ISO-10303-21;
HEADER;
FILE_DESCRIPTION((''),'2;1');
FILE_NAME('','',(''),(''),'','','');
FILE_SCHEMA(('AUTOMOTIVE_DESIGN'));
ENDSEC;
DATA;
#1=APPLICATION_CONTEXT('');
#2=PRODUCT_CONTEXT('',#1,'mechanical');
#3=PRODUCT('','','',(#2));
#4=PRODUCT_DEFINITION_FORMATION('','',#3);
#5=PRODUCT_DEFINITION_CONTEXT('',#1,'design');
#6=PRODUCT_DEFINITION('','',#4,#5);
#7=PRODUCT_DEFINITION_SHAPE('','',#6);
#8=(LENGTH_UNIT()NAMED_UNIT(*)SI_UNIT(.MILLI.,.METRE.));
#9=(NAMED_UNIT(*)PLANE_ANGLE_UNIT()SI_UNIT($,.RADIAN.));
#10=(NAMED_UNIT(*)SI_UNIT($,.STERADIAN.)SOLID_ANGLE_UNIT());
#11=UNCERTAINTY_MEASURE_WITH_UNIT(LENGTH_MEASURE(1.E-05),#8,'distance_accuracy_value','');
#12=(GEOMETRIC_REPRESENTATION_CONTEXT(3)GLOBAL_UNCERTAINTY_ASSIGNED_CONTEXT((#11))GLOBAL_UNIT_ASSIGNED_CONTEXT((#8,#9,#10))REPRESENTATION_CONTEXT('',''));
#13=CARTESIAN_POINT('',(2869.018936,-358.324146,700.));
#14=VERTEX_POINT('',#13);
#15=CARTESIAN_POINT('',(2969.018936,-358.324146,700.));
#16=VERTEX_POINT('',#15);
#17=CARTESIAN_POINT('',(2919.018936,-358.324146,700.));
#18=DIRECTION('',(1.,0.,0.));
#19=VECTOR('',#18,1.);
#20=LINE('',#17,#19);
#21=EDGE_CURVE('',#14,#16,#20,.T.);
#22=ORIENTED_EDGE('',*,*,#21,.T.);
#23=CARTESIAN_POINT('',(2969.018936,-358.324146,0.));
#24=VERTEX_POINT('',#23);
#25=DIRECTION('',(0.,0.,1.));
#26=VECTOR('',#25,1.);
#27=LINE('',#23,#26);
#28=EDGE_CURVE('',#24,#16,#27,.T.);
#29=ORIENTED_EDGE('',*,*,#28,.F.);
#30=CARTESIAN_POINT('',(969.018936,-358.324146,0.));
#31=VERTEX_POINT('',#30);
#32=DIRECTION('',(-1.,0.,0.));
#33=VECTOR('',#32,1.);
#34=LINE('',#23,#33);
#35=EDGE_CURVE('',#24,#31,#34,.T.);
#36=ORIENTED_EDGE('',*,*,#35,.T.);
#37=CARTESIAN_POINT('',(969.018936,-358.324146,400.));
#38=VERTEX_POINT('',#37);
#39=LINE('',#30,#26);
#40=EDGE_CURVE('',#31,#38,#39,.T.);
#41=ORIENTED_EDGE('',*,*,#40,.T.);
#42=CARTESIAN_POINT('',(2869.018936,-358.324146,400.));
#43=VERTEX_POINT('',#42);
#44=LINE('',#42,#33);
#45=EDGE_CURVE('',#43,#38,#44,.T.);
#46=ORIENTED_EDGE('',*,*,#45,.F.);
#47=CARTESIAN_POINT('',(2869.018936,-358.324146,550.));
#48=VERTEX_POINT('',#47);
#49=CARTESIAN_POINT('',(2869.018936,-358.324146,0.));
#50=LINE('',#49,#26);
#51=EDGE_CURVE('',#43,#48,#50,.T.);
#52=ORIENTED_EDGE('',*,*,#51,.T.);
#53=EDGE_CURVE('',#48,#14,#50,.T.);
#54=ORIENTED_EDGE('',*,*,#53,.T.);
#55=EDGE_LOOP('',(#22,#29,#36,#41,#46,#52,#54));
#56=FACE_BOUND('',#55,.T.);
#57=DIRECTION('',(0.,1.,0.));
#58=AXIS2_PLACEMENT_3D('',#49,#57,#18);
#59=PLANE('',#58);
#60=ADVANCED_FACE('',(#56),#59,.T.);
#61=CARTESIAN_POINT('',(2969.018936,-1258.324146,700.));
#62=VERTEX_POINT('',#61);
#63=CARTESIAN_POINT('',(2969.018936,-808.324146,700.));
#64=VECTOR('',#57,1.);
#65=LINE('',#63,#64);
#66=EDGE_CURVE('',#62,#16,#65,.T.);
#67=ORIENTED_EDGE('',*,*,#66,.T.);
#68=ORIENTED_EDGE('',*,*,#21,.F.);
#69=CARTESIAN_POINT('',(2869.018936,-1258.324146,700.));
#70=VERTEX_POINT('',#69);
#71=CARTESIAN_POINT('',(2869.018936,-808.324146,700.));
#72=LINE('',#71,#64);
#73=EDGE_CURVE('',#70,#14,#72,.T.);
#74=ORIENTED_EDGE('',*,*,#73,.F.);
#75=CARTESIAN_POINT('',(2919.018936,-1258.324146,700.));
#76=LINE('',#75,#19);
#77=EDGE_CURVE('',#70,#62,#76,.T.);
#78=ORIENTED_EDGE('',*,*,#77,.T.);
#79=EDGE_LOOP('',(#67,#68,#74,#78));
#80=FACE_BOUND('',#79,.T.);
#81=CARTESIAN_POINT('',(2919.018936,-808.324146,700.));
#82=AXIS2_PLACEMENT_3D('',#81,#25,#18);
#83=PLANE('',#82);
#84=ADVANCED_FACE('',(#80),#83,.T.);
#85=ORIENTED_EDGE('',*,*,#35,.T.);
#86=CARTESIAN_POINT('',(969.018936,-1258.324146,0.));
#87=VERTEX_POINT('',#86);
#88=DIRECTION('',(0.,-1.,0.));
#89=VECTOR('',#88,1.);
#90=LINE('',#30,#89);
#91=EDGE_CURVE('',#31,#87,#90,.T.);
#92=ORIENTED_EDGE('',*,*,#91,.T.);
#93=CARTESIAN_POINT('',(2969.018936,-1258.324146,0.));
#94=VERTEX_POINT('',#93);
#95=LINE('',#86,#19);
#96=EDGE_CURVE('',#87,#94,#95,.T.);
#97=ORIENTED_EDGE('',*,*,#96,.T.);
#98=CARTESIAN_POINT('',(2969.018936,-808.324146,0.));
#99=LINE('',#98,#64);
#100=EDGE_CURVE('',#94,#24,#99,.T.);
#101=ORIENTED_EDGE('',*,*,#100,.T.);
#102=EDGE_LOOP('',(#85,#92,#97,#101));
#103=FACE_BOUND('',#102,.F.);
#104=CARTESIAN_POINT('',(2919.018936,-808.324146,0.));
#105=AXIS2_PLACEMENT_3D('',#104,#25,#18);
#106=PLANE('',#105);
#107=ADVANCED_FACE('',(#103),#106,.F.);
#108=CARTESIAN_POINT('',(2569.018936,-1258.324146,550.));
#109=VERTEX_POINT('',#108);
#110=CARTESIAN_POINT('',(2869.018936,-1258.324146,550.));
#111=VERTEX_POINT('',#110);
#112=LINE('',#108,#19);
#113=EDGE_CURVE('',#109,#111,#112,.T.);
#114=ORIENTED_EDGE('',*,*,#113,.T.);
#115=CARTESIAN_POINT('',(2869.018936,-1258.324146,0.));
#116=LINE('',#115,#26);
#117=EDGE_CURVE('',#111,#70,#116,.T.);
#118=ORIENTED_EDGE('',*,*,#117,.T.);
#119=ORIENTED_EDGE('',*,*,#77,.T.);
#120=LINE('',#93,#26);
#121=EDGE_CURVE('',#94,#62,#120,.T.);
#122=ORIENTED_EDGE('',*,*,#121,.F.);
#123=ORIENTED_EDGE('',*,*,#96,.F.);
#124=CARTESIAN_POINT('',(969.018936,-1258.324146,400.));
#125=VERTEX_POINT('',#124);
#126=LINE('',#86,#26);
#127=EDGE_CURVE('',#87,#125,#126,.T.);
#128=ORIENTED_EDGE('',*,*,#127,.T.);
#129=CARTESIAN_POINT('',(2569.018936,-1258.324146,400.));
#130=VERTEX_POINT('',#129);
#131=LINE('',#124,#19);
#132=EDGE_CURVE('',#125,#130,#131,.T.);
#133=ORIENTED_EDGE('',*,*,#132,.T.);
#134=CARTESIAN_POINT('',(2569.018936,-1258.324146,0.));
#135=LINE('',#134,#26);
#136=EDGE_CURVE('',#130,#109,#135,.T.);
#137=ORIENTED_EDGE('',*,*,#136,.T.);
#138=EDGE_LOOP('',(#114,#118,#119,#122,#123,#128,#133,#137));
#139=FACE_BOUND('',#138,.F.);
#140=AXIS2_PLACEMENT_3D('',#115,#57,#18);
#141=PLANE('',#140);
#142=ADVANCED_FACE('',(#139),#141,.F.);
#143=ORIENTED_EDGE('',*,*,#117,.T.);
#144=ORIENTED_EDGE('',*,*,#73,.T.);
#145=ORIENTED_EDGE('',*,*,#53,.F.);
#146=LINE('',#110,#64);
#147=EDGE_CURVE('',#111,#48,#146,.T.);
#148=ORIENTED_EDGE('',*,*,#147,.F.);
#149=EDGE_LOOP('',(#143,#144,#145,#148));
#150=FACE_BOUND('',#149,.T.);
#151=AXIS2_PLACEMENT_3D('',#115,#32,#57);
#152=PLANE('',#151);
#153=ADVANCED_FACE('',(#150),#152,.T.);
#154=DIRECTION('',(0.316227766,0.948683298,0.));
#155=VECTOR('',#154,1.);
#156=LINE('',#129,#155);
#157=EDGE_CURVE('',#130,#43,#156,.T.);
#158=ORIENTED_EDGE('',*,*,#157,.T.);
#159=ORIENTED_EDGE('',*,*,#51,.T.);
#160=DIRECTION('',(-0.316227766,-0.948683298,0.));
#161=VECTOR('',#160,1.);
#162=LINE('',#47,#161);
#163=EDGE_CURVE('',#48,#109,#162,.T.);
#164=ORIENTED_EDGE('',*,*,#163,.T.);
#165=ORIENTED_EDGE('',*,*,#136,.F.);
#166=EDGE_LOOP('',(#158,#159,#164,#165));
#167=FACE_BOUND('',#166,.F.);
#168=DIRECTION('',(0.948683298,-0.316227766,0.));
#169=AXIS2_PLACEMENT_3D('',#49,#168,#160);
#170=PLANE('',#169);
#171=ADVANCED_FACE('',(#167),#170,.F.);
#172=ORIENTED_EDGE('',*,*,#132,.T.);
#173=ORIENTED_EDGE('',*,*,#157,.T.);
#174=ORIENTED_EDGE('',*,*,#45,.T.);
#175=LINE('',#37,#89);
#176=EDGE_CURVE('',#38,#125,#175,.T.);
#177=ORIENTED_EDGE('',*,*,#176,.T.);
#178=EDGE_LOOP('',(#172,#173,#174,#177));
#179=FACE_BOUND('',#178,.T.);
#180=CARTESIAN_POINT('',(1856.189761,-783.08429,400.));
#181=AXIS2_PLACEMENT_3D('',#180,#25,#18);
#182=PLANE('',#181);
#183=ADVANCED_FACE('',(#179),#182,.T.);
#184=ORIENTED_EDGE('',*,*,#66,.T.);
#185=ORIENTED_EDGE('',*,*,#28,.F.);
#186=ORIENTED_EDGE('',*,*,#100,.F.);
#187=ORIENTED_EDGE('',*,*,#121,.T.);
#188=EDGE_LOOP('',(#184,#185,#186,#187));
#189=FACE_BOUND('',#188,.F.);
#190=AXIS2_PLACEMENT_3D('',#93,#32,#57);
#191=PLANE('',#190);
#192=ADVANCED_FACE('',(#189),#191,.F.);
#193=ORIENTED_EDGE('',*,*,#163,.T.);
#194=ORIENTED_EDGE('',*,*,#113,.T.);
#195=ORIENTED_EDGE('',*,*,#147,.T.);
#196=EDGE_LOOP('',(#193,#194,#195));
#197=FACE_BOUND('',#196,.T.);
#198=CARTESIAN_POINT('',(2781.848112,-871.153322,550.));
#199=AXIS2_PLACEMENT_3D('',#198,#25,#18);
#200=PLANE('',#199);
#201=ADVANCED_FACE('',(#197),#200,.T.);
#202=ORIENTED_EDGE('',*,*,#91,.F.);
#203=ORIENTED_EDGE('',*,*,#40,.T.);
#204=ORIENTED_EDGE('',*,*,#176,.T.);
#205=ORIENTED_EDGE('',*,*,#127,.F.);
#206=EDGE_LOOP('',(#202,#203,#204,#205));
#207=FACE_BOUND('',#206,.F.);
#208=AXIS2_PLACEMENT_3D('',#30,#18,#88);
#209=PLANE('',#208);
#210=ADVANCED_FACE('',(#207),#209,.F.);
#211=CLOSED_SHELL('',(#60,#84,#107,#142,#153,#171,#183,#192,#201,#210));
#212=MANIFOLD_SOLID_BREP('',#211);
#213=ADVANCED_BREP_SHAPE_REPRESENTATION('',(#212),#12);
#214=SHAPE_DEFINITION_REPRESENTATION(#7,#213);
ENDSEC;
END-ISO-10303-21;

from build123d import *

# Parameters (mm, degrees)
F2_DEPTH = 400
F3_DEPTH = 550
F0_W     = 100
F0_H     = 900
F4_DEPTH = 700


# Not quite as in the source:
# - the program builds the solid bodies; features that only make, move or delete a surface that nothing else refers to are left out


with BuildPart() as f2:
    # F0 (on Top) → F2 (new body)
    with BuildSketch(Plane.XY):
        Polygon((2869.0189361572, -358.3241462708), (969.0189361572, -358.3241462708), (969.0189361572, -1258.3241462708), (2569.0189361572, -1258.3241462708), align=None)
    extrude(amount=F2_DEPTH)

    # F0 (on Top) → F3 (join)
    with BuildSketch(Plane.XY):
        Polygon((2869.0189361572, -1258.3241462708), (2869.0189361572, -358.3241462708), (2569.0189361572, -1258.3241462708), align=None)
    extrude(amount=F3_DEPTH)

    # F0 (on Top) → F4 (join)
    with BuildSketch(Plane.XY):
        with Locations((2919.0189361572, -808.3241462708)):
            Rectangle(F0_W, F0_H)
    extrude(amount=F4_DEPTH)


solid = f2.part
